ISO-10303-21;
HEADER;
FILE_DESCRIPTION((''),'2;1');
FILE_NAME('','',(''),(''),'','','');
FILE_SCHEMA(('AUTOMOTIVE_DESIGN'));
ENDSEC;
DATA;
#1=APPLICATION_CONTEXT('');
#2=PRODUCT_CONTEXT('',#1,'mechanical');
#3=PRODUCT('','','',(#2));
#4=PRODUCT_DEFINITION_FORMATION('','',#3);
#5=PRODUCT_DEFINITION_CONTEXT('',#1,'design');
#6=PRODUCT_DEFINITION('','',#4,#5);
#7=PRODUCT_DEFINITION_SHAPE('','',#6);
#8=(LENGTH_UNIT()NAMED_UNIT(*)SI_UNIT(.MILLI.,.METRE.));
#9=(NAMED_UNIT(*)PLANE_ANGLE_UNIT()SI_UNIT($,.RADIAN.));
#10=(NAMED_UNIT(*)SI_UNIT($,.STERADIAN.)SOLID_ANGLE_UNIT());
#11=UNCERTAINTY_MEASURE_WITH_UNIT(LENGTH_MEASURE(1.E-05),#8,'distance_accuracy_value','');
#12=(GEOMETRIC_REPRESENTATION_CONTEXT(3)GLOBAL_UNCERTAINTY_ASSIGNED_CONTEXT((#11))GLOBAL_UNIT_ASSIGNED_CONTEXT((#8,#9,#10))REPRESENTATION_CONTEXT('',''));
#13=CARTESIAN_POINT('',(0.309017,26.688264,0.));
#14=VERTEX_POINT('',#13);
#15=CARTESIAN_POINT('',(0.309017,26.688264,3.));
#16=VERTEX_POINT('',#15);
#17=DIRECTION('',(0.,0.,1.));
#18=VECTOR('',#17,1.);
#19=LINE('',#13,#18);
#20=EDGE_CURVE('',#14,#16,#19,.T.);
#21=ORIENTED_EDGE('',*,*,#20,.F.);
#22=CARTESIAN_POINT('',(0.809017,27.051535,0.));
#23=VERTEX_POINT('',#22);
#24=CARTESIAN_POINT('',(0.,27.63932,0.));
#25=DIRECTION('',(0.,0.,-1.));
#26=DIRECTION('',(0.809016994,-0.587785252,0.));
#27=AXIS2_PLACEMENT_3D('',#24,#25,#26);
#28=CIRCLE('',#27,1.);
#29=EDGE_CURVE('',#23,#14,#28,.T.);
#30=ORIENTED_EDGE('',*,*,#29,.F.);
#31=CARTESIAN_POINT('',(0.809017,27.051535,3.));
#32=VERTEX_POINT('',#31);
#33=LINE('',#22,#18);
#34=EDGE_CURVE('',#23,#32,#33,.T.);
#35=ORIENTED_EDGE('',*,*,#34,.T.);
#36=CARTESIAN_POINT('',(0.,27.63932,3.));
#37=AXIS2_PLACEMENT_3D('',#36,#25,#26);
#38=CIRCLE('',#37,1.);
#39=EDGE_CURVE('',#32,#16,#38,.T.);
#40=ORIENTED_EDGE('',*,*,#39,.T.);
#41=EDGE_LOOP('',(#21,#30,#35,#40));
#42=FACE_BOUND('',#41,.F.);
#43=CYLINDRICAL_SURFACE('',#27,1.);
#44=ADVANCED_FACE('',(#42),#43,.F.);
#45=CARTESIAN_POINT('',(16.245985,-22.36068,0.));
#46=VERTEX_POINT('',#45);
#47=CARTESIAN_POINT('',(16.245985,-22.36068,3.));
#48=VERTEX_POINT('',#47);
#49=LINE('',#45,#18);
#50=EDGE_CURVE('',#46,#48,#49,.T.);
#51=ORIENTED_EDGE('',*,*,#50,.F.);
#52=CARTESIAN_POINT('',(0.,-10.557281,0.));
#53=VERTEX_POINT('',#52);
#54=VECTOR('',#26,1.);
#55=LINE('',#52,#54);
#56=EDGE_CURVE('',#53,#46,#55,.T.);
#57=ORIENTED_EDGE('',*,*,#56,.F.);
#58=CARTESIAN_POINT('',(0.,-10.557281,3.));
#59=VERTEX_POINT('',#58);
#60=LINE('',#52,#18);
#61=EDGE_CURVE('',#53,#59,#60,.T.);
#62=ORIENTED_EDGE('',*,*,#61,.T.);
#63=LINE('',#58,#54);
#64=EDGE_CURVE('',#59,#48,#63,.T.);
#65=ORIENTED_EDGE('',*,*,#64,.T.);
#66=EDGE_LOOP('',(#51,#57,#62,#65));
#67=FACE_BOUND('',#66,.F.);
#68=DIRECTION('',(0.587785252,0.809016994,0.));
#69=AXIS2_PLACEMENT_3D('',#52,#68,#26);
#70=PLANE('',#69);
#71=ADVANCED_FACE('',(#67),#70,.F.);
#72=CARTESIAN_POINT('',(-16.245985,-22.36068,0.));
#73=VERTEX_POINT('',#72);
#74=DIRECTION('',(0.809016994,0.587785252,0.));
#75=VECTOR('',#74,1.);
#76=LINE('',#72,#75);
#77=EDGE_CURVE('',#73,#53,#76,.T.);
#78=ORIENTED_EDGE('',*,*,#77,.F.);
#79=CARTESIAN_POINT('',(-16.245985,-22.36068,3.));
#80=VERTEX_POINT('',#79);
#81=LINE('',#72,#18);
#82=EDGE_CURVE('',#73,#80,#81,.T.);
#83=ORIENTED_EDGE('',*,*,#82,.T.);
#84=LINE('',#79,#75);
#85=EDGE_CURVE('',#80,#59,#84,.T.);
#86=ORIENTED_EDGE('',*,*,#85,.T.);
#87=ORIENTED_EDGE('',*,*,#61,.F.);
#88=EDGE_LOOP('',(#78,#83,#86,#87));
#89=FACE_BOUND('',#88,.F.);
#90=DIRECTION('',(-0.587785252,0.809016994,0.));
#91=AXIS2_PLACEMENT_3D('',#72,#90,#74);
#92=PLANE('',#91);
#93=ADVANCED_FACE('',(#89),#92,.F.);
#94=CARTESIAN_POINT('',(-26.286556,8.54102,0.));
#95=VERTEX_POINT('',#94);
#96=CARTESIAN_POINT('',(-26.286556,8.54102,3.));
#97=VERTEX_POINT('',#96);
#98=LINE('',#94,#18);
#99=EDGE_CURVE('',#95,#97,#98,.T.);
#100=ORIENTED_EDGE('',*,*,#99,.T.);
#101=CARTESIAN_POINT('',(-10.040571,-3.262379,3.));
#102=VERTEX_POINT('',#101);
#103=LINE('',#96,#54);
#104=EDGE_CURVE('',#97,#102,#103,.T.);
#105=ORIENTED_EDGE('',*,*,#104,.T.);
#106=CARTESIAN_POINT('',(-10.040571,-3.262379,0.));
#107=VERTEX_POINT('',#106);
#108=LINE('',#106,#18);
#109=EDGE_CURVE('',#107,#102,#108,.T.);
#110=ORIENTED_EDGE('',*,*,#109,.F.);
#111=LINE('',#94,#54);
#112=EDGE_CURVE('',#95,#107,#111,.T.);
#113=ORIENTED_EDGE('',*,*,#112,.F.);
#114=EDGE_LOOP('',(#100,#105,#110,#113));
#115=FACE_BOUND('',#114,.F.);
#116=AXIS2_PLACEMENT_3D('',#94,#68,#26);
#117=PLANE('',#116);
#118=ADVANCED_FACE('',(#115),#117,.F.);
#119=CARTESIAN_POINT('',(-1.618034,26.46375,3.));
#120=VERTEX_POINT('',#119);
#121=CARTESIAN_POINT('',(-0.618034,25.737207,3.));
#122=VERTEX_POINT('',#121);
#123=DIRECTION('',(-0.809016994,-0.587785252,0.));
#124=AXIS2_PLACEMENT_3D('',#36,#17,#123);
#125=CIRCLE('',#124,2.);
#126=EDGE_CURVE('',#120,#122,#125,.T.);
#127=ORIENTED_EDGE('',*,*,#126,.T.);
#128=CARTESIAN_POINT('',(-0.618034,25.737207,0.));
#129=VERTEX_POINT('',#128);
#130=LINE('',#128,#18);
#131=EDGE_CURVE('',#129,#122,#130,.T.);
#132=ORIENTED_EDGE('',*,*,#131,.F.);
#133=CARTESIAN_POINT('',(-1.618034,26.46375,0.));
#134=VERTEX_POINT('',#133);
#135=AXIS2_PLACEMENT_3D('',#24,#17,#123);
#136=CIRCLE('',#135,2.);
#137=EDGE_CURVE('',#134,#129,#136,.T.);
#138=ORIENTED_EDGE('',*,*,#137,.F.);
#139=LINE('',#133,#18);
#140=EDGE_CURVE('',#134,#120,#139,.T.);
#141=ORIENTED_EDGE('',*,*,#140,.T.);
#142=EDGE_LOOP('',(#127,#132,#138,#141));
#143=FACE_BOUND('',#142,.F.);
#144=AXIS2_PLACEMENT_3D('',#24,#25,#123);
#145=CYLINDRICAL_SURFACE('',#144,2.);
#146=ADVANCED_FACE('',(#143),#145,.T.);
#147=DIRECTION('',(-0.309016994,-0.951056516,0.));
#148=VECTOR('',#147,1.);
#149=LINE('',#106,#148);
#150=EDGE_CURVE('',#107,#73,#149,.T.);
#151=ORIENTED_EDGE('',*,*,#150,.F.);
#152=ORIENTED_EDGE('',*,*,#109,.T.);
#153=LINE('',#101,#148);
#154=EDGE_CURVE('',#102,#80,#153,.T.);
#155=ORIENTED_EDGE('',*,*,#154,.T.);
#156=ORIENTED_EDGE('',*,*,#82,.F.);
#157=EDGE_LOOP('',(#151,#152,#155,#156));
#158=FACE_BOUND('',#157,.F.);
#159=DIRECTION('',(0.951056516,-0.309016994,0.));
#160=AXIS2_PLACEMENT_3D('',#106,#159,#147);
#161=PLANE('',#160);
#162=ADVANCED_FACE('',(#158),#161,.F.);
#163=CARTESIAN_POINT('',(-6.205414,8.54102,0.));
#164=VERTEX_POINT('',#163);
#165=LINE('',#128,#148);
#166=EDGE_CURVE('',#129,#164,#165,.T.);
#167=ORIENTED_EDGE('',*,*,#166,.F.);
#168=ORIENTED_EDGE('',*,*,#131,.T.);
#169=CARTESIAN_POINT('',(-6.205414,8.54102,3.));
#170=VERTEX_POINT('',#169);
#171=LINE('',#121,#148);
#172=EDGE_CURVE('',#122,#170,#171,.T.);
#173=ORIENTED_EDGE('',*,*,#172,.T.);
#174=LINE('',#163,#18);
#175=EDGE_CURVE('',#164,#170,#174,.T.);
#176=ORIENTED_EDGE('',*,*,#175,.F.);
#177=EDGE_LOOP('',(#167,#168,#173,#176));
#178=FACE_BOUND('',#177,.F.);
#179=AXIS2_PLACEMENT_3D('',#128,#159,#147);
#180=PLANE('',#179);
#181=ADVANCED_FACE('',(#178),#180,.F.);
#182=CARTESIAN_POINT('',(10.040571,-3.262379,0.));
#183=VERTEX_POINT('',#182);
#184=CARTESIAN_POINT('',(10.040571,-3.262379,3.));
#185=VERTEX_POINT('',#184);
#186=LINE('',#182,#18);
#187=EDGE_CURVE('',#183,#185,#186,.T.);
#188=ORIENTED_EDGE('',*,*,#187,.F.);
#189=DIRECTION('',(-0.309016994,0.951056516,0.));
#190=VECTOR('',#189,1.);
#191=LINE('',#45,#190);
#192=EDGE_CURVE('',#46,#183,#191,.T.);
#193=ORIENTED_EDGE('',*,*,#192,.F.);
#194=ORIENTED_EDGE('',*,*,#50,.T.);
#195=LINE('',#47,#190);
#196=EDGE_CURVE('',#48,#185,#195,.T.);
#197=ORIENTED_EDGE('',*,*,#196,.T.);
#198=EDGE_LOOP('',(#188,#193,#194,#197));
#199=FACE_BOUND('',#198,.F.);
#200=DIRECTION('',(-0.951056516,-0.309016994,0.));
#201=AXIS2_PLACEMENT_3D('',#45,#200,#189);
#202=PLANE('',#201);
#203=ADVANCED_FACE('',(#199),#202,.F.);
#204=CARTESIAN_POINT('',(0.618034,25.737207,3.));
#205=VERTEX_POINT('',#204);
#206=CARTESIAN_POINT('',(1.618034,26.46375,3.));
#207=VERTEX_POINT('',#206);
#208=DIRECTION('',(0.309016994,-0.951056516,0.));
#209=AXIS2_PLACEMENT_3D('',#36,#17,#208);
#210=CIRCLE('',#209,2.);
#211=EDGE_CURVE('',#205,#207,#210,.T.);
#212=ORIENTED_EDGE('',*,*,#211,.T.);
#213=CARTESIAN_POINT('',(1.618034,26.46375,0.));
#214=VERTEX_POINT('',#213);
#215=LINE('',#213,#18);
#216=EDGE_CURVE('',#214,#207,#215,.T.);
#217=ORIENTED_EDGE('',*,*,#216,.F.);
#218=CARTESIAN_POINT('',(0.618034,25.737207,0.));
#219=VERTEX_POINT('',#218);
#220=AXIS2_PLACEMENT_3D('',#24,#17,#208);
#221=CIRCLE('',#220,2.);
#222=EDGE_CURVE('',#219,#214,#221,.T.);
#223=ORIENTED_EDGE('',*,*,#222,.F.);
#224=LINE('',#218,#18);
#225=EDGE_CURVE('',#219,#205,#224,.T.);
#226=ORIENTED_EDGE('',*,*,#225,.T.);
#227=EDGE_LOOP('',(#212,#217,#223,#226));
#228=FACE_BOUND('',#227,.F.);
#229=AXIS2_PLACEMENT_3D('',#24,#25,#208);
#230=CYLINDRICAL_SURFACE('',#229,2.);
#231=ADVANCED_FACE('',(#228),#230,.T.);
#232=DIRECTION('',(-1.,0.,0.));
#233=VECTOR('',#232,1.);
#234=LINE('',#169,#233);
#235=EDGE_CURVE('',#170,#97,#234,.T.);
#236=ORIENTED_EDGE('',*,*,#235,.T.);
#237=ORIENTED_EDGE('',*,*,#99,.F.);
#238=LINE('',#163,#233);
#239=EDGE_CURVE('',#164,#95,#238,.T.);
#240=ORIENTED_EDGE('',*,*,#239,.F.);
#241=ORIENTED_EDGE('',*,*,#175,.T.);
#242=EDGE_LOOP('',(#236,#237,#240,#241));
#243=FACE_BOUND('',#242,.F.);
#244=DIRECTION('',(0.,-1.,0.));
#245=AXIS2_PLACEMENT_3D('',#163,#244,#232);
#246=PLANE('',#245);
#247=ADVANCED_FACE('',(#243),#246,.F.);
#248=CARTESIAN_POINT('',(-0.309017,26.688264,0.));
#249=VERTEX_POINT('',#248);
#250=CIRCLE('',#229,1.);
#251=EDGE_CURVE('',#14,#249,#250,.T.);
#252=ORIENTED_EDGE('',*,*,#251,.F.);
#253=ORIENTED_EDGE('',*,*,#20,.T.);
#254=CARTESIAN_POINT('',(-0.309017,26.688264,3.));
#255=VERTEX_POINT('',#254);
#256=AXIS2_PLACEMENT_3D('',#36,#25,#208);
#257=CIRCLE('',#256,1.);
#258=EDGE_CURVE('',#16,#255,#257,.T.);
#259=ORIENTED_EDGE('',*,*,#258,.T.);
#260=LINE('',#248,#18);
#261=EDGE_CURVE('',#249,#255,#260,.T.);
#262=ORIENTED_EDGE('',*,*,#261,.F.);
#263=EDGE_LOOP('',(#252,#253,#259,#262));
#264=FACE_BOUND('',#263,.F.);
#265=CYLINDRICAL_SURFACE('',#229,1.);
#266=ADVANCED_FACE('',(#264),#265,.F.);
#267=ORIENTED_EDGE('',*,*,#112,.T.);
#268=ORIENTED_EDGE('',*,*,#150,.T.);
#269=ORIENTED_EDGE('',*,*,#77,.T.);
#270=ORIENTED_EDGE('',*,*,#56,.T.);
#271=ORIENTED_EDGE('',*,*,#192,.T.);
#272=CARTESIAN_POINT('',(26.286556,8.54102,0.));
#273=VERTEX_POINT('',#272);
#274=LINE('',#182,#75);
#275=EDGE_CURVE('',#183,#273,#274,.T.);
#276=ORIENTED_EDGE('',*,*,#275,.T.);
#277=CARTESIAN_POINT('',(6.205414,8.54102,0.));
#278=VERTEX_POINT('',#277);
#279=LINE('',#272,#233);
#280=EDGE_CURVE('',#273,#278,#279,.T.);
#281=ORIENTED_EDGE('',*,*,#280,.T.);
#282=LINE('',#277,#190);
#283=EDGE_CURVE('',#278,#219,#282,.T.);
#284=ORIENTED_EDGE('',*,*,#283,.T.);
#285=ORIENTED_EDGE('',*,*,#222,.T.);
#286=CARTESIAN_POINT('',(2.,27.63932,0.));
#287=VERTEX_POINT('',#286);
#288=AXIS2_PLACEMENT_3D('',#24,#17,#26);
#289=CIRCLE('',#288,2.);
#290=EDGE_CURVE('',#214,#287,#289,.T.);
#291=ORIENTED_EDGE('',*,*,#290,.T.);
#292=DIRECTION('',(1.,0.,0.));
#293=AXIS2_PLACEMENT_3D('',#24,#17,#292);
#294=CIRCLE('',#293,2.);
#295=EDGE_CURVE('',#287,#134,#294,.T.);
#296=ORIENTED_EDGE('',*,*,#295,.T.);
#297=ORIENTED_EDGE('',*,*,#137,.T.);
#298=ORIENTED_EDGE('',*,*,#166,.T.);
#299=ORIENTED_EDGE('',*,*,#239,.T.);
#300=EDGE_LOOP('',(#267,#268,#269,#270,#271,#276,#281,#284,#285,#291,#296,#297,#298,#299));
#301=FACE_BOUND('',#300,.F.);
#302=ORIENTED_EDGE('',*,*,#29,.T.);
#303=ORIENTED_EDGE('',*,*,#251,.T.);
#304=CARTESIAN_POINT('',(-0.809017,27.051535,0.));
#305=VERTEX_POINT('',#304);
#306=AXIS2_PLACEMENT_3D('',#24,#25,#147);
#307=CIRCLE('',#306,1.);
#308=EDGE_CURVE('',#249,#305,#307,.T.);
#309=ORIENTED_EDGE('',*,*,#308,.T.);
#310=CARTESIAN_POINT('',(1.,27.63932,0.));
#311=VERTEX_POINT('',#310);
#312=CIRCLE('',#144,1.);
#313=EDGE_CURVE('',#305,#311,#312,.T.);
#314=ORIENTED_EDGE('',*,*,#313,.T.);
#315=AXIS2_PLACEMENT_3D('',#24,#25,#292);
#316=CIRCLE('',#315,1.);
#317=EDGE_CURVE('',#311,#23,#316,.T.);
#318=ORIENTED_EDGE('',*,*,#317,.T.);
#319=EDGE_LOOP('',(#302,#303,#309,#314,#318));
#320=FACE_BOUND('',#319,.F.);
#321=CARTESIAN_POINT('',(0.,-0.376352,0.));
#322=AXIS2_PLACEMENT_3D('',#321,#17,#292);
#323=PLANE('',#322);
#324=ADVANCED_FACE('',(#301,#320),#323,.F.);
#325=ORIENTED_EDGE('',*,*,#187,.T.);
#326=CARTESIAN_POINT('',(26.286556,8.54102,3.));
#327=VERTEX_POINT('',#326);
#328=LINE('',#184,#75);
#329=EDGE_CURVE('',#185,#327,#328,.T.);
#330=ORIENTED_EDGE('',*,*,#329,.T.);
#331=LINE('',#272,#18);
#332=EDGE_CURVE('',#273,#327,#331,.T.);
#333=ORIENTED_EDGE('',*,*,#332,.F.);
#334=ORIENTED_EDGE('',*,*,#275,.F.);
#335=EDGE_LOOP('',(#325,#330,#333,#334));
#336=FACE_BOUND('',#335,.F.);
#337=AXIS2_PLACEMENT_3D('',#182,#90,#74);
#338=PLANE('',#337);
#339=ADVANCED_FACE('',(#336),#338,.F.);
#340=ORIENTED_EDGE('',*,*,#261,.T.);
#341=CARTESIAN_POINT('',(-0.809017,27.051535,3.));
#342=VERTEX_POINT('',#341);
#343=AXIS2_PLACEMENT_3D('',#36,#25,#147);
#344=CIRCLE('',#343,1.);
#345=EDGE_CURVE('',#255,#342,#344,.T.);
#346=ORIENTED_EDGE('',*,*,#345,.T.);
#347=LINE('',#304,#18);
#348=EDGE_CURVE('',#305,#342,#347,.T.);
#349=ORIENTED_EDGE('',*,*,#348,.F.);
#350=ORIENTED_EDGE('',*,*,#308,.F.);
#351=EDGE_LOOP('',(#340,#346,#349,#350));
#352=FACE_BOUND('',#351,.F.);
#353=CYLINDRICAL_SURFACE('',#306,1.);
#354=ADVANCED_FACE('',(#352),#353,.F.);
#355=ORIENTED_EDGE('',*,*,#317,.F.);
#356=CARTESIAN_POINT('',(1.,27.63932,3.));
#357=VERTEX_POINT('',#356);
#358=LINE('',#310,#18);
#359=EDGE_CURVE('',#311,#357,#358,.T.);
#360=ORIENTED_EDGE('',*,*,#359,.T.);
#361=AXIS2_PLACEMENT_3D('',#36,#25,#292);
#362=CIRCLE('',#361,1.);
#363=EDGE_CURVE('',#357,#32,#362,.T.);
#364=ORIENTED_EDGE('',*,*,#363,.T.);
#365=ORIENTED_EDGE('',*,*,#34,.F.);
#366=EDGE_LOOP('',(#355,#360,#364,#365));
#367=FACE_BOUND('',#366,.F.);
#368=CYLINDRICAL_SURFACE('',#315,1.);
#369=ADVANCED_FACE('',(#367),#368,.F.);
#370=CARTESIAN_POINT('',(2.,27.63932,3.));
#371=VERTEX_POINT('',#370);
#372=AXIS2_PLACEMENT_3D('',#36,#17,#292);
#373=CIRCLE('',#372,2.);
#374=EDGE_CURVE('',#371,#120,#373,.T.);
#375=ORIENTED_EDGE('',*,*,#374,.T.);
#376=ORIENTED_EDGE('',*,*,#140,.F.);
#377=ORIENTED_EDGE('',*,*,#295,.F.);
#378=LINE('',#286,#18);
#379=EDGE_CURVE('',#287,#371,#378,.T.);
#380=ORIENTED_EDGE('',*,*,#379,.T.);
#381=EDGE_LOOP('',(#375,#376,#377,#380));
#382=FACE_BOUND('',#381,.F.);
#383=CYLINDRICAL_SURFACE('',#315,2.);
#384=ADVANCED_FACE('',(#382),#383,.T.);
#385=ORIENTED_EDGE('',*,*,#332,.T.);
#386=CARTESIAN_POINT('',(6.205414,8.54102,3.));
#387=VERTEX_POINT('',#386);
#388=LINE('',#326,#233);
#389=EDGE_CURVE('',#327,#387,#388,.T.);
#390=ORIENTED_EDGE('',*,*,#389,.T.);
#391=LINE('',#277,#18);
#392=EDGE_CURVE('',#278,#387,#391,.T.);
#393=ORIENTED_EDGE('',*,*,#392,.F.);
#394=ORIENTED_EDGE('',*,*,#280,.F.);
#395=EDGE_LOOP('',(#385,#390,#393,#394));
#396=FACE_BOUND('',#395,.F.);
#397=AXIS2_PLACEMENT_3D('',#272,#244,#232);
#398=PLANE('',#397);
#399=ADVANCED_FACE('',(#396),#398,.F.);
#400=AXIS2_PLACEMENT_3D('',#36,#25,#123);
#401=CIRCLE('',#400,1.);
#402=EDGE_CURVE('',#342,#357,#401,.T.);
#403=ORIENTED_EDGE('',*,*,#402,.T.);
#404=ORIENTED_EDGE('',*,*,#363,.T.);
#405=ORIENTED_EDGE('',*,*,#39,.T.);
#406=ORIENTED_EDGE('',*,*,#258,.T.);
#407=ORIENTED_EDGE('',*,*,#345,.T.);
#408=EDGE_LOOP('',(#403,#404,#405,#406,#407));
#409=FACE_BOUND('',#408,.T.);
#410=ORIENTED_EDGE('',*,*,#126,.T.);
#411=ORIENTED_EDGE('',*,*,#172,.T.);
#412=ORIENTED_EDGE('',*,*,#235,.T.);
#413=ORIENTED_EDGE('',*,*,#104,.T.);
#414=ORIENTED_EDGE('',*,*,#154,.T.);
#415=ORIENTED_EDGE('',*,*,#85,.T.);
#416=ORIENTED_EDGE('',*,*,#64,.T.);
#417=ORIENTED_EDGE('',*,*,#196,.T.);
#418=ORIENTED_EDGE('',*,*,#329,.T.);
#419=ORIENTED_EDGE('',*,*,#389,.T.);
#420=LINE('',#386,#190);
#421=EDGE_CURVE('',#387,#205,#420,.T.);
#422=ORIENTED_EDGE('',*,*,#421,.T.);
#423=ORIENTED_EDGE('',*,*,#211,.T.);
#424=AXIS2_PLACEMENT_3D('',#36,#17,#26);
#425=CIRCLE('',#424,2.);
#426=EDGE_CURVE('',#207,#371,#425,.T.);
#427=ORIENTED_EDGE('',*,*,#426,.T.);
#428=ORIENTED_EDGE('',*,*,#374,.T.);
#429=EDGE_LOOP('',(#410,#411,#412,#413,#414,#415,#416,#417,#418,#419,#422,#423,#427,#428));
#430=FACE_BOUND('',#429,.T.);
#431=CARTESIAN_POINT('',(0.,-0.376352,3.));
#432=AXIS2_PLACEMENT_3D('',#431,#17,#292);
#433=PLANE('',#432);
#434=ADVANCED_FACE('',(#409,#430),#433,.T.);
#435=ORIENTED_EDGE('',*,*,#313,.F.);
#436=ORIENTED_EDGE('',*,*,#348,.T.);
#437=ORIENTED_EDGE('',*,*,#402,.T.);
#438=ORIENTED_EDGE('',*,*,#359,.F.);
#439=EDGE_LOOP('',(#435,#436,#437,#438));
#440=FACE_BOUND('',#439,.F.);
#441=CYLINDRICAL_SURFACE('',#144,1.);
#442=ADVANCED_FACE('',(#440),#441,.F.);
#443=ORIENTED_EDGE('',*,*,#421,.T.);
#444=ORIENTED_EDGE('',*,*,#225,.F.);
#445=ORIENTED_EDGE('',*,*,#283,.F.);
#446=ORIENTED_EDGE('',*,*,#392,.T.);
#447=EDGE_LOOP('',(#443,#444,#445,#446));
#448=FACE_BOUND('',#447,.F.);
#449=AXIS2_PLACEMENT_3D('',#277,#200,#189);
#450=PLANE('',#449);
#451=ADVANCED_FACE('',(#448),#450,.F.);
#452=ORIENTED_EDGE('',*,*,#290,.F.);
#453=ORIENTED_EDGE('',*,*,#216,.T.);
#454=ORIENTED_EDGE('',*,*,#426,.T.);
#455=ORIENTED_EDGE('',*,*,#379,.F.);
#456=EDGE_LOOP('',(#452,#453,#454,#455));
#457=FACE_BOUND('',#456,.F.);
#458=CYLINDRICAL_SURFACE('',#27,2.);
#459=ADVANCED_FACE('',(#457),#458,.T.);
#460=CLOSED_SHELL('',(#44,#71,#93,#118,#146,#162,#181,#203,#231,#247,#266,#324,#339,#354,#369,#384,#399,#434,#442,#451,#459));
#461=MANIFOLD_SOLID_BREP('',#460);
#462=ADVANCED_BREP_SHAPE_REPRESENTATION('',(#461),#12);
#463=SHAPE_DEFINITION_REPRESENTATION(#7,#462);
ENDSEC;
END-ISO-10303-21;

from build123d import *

# Parameters (mm, degrees)
F1_DEPTH = 3


# Not quite as in the source:
# - a feature names something its author has since deleted; it is built from what else it names


with BuildPart() as f1:
    # F0 (on Top) → F1 (new body)
    with BuildSketch(Plane.XY):
        with BuildLine():
            ThreePointArc((0.6180339887, 25.7372071924), (0, 25.639320225), (-0.6180339887, 25.7372071924))
            Line((-0.6180339887, 25.7372071924), (-6.2054140173, 8.5410196625))
            Line((-6.2054140173, 8.5410196625), (-26.286555606, 8.5410196625))
            Line((-26.286555606, 8.5410196625), (-10.0405707943, -3.2623792125))
            Line((-10.0405707943, -3.2623792125), (-16.2459848116, -22.360679775))
            Line((-16.2459848116, -22.360679775), (0, -10.5572809))
            Line((0, -10.5572809), (16.2459848116, -22.360679775))
            Line((16.2459848116, -22.360679775), (10.0405707943, -3.2623792125))
            Line((10.0405707943, -3.2623792125), (26.286555606, 8.5410196625))
            Line((26.286555606, 8.5410196625), (6.2054140173, 8.5410196625))
            Line((6.2054140173, 8.5410196625), (0.6180339887, 25.7372071924))
        make_face()
        with BuildLine():
            ThreePointArc((0.3090169944, 26.6882637087), (0, 26.639320225), (-0.3090169944, 26.6882637087))
            Line((-0.3090169944, 26.6882637087), (-0.6180339887, 25.7372071924))
            ThreePointArc((-0.6180339887, 25.7372071924), (0, 25.639320225), (0.6180339887, 25.7372071924))
            Line((0.6180339887, 25.7372071924), (0.3090169944, 26.6882637087))
        make_face()
        with BuildLine():
            Line((1.6180339887, 26.4637497204), (0.8090169944, 27.0515349727))
            ThreePointArc((0.8090169944, 27.0515349727), (0.5877852523, 26.8303032306), (0.3090169944, 26.6882637087))
            Line((0.3090169944, 26.6882637087), (0.6180339887, 25.7372071924))
            ThreePointArc((0.6180339887, 25.7372071924), (1.1755705046, 26.0212862363), (1.6180339887, 26.4637497204))
        make_face()
        with BuildLine():
            ThreePointArc((1, 27.639320225), (0.9510565163, 27.3303032306), (0.8090169944, 27.0515349727))
            Line((0.8090169944, 27.0515349727), (1.6180339887, 26.4637497204))
            ThreePointArc((1.6180339887, 26.4637497204), (1.9021130326, 27.0212862363), (2, 27.639320225))
            ThreePointArc((2, 27.639320225), (-0.6180339887, 29.5414332576), (-1.6180339887, 26.4637497204))
            Line((-1.6180339887, 26.4637497204), (-0.8090169944, 27.0515349727))
            ThreePointArc((-0.8090169944, 27.0515349727), (-0.3090169944, 28.5903767413), (1, 27.639320225))
        make_face()
        with BuildLine():
            ThreePointArc((-0.3090169944, 26.6882637087), (-0.5877852523, 26.8303032306), (-0.8090169944, 27.0515349727))
            Line((-0.8090169944, 27.0515349727), (-1.6180339887, 26.4637497204))
            ThreePointArc((-1.6180339887, 26.4637497204), (-1.1755705046, 26.0212862363), (-0.6180339887, 25.7372071924))
            Line((-0.6180339887, 25.7372071924), (-0.3090169944, 26.6882637087))
        make_face()
    extrude(amount=F1_DEPTH)


solid = f1.part
